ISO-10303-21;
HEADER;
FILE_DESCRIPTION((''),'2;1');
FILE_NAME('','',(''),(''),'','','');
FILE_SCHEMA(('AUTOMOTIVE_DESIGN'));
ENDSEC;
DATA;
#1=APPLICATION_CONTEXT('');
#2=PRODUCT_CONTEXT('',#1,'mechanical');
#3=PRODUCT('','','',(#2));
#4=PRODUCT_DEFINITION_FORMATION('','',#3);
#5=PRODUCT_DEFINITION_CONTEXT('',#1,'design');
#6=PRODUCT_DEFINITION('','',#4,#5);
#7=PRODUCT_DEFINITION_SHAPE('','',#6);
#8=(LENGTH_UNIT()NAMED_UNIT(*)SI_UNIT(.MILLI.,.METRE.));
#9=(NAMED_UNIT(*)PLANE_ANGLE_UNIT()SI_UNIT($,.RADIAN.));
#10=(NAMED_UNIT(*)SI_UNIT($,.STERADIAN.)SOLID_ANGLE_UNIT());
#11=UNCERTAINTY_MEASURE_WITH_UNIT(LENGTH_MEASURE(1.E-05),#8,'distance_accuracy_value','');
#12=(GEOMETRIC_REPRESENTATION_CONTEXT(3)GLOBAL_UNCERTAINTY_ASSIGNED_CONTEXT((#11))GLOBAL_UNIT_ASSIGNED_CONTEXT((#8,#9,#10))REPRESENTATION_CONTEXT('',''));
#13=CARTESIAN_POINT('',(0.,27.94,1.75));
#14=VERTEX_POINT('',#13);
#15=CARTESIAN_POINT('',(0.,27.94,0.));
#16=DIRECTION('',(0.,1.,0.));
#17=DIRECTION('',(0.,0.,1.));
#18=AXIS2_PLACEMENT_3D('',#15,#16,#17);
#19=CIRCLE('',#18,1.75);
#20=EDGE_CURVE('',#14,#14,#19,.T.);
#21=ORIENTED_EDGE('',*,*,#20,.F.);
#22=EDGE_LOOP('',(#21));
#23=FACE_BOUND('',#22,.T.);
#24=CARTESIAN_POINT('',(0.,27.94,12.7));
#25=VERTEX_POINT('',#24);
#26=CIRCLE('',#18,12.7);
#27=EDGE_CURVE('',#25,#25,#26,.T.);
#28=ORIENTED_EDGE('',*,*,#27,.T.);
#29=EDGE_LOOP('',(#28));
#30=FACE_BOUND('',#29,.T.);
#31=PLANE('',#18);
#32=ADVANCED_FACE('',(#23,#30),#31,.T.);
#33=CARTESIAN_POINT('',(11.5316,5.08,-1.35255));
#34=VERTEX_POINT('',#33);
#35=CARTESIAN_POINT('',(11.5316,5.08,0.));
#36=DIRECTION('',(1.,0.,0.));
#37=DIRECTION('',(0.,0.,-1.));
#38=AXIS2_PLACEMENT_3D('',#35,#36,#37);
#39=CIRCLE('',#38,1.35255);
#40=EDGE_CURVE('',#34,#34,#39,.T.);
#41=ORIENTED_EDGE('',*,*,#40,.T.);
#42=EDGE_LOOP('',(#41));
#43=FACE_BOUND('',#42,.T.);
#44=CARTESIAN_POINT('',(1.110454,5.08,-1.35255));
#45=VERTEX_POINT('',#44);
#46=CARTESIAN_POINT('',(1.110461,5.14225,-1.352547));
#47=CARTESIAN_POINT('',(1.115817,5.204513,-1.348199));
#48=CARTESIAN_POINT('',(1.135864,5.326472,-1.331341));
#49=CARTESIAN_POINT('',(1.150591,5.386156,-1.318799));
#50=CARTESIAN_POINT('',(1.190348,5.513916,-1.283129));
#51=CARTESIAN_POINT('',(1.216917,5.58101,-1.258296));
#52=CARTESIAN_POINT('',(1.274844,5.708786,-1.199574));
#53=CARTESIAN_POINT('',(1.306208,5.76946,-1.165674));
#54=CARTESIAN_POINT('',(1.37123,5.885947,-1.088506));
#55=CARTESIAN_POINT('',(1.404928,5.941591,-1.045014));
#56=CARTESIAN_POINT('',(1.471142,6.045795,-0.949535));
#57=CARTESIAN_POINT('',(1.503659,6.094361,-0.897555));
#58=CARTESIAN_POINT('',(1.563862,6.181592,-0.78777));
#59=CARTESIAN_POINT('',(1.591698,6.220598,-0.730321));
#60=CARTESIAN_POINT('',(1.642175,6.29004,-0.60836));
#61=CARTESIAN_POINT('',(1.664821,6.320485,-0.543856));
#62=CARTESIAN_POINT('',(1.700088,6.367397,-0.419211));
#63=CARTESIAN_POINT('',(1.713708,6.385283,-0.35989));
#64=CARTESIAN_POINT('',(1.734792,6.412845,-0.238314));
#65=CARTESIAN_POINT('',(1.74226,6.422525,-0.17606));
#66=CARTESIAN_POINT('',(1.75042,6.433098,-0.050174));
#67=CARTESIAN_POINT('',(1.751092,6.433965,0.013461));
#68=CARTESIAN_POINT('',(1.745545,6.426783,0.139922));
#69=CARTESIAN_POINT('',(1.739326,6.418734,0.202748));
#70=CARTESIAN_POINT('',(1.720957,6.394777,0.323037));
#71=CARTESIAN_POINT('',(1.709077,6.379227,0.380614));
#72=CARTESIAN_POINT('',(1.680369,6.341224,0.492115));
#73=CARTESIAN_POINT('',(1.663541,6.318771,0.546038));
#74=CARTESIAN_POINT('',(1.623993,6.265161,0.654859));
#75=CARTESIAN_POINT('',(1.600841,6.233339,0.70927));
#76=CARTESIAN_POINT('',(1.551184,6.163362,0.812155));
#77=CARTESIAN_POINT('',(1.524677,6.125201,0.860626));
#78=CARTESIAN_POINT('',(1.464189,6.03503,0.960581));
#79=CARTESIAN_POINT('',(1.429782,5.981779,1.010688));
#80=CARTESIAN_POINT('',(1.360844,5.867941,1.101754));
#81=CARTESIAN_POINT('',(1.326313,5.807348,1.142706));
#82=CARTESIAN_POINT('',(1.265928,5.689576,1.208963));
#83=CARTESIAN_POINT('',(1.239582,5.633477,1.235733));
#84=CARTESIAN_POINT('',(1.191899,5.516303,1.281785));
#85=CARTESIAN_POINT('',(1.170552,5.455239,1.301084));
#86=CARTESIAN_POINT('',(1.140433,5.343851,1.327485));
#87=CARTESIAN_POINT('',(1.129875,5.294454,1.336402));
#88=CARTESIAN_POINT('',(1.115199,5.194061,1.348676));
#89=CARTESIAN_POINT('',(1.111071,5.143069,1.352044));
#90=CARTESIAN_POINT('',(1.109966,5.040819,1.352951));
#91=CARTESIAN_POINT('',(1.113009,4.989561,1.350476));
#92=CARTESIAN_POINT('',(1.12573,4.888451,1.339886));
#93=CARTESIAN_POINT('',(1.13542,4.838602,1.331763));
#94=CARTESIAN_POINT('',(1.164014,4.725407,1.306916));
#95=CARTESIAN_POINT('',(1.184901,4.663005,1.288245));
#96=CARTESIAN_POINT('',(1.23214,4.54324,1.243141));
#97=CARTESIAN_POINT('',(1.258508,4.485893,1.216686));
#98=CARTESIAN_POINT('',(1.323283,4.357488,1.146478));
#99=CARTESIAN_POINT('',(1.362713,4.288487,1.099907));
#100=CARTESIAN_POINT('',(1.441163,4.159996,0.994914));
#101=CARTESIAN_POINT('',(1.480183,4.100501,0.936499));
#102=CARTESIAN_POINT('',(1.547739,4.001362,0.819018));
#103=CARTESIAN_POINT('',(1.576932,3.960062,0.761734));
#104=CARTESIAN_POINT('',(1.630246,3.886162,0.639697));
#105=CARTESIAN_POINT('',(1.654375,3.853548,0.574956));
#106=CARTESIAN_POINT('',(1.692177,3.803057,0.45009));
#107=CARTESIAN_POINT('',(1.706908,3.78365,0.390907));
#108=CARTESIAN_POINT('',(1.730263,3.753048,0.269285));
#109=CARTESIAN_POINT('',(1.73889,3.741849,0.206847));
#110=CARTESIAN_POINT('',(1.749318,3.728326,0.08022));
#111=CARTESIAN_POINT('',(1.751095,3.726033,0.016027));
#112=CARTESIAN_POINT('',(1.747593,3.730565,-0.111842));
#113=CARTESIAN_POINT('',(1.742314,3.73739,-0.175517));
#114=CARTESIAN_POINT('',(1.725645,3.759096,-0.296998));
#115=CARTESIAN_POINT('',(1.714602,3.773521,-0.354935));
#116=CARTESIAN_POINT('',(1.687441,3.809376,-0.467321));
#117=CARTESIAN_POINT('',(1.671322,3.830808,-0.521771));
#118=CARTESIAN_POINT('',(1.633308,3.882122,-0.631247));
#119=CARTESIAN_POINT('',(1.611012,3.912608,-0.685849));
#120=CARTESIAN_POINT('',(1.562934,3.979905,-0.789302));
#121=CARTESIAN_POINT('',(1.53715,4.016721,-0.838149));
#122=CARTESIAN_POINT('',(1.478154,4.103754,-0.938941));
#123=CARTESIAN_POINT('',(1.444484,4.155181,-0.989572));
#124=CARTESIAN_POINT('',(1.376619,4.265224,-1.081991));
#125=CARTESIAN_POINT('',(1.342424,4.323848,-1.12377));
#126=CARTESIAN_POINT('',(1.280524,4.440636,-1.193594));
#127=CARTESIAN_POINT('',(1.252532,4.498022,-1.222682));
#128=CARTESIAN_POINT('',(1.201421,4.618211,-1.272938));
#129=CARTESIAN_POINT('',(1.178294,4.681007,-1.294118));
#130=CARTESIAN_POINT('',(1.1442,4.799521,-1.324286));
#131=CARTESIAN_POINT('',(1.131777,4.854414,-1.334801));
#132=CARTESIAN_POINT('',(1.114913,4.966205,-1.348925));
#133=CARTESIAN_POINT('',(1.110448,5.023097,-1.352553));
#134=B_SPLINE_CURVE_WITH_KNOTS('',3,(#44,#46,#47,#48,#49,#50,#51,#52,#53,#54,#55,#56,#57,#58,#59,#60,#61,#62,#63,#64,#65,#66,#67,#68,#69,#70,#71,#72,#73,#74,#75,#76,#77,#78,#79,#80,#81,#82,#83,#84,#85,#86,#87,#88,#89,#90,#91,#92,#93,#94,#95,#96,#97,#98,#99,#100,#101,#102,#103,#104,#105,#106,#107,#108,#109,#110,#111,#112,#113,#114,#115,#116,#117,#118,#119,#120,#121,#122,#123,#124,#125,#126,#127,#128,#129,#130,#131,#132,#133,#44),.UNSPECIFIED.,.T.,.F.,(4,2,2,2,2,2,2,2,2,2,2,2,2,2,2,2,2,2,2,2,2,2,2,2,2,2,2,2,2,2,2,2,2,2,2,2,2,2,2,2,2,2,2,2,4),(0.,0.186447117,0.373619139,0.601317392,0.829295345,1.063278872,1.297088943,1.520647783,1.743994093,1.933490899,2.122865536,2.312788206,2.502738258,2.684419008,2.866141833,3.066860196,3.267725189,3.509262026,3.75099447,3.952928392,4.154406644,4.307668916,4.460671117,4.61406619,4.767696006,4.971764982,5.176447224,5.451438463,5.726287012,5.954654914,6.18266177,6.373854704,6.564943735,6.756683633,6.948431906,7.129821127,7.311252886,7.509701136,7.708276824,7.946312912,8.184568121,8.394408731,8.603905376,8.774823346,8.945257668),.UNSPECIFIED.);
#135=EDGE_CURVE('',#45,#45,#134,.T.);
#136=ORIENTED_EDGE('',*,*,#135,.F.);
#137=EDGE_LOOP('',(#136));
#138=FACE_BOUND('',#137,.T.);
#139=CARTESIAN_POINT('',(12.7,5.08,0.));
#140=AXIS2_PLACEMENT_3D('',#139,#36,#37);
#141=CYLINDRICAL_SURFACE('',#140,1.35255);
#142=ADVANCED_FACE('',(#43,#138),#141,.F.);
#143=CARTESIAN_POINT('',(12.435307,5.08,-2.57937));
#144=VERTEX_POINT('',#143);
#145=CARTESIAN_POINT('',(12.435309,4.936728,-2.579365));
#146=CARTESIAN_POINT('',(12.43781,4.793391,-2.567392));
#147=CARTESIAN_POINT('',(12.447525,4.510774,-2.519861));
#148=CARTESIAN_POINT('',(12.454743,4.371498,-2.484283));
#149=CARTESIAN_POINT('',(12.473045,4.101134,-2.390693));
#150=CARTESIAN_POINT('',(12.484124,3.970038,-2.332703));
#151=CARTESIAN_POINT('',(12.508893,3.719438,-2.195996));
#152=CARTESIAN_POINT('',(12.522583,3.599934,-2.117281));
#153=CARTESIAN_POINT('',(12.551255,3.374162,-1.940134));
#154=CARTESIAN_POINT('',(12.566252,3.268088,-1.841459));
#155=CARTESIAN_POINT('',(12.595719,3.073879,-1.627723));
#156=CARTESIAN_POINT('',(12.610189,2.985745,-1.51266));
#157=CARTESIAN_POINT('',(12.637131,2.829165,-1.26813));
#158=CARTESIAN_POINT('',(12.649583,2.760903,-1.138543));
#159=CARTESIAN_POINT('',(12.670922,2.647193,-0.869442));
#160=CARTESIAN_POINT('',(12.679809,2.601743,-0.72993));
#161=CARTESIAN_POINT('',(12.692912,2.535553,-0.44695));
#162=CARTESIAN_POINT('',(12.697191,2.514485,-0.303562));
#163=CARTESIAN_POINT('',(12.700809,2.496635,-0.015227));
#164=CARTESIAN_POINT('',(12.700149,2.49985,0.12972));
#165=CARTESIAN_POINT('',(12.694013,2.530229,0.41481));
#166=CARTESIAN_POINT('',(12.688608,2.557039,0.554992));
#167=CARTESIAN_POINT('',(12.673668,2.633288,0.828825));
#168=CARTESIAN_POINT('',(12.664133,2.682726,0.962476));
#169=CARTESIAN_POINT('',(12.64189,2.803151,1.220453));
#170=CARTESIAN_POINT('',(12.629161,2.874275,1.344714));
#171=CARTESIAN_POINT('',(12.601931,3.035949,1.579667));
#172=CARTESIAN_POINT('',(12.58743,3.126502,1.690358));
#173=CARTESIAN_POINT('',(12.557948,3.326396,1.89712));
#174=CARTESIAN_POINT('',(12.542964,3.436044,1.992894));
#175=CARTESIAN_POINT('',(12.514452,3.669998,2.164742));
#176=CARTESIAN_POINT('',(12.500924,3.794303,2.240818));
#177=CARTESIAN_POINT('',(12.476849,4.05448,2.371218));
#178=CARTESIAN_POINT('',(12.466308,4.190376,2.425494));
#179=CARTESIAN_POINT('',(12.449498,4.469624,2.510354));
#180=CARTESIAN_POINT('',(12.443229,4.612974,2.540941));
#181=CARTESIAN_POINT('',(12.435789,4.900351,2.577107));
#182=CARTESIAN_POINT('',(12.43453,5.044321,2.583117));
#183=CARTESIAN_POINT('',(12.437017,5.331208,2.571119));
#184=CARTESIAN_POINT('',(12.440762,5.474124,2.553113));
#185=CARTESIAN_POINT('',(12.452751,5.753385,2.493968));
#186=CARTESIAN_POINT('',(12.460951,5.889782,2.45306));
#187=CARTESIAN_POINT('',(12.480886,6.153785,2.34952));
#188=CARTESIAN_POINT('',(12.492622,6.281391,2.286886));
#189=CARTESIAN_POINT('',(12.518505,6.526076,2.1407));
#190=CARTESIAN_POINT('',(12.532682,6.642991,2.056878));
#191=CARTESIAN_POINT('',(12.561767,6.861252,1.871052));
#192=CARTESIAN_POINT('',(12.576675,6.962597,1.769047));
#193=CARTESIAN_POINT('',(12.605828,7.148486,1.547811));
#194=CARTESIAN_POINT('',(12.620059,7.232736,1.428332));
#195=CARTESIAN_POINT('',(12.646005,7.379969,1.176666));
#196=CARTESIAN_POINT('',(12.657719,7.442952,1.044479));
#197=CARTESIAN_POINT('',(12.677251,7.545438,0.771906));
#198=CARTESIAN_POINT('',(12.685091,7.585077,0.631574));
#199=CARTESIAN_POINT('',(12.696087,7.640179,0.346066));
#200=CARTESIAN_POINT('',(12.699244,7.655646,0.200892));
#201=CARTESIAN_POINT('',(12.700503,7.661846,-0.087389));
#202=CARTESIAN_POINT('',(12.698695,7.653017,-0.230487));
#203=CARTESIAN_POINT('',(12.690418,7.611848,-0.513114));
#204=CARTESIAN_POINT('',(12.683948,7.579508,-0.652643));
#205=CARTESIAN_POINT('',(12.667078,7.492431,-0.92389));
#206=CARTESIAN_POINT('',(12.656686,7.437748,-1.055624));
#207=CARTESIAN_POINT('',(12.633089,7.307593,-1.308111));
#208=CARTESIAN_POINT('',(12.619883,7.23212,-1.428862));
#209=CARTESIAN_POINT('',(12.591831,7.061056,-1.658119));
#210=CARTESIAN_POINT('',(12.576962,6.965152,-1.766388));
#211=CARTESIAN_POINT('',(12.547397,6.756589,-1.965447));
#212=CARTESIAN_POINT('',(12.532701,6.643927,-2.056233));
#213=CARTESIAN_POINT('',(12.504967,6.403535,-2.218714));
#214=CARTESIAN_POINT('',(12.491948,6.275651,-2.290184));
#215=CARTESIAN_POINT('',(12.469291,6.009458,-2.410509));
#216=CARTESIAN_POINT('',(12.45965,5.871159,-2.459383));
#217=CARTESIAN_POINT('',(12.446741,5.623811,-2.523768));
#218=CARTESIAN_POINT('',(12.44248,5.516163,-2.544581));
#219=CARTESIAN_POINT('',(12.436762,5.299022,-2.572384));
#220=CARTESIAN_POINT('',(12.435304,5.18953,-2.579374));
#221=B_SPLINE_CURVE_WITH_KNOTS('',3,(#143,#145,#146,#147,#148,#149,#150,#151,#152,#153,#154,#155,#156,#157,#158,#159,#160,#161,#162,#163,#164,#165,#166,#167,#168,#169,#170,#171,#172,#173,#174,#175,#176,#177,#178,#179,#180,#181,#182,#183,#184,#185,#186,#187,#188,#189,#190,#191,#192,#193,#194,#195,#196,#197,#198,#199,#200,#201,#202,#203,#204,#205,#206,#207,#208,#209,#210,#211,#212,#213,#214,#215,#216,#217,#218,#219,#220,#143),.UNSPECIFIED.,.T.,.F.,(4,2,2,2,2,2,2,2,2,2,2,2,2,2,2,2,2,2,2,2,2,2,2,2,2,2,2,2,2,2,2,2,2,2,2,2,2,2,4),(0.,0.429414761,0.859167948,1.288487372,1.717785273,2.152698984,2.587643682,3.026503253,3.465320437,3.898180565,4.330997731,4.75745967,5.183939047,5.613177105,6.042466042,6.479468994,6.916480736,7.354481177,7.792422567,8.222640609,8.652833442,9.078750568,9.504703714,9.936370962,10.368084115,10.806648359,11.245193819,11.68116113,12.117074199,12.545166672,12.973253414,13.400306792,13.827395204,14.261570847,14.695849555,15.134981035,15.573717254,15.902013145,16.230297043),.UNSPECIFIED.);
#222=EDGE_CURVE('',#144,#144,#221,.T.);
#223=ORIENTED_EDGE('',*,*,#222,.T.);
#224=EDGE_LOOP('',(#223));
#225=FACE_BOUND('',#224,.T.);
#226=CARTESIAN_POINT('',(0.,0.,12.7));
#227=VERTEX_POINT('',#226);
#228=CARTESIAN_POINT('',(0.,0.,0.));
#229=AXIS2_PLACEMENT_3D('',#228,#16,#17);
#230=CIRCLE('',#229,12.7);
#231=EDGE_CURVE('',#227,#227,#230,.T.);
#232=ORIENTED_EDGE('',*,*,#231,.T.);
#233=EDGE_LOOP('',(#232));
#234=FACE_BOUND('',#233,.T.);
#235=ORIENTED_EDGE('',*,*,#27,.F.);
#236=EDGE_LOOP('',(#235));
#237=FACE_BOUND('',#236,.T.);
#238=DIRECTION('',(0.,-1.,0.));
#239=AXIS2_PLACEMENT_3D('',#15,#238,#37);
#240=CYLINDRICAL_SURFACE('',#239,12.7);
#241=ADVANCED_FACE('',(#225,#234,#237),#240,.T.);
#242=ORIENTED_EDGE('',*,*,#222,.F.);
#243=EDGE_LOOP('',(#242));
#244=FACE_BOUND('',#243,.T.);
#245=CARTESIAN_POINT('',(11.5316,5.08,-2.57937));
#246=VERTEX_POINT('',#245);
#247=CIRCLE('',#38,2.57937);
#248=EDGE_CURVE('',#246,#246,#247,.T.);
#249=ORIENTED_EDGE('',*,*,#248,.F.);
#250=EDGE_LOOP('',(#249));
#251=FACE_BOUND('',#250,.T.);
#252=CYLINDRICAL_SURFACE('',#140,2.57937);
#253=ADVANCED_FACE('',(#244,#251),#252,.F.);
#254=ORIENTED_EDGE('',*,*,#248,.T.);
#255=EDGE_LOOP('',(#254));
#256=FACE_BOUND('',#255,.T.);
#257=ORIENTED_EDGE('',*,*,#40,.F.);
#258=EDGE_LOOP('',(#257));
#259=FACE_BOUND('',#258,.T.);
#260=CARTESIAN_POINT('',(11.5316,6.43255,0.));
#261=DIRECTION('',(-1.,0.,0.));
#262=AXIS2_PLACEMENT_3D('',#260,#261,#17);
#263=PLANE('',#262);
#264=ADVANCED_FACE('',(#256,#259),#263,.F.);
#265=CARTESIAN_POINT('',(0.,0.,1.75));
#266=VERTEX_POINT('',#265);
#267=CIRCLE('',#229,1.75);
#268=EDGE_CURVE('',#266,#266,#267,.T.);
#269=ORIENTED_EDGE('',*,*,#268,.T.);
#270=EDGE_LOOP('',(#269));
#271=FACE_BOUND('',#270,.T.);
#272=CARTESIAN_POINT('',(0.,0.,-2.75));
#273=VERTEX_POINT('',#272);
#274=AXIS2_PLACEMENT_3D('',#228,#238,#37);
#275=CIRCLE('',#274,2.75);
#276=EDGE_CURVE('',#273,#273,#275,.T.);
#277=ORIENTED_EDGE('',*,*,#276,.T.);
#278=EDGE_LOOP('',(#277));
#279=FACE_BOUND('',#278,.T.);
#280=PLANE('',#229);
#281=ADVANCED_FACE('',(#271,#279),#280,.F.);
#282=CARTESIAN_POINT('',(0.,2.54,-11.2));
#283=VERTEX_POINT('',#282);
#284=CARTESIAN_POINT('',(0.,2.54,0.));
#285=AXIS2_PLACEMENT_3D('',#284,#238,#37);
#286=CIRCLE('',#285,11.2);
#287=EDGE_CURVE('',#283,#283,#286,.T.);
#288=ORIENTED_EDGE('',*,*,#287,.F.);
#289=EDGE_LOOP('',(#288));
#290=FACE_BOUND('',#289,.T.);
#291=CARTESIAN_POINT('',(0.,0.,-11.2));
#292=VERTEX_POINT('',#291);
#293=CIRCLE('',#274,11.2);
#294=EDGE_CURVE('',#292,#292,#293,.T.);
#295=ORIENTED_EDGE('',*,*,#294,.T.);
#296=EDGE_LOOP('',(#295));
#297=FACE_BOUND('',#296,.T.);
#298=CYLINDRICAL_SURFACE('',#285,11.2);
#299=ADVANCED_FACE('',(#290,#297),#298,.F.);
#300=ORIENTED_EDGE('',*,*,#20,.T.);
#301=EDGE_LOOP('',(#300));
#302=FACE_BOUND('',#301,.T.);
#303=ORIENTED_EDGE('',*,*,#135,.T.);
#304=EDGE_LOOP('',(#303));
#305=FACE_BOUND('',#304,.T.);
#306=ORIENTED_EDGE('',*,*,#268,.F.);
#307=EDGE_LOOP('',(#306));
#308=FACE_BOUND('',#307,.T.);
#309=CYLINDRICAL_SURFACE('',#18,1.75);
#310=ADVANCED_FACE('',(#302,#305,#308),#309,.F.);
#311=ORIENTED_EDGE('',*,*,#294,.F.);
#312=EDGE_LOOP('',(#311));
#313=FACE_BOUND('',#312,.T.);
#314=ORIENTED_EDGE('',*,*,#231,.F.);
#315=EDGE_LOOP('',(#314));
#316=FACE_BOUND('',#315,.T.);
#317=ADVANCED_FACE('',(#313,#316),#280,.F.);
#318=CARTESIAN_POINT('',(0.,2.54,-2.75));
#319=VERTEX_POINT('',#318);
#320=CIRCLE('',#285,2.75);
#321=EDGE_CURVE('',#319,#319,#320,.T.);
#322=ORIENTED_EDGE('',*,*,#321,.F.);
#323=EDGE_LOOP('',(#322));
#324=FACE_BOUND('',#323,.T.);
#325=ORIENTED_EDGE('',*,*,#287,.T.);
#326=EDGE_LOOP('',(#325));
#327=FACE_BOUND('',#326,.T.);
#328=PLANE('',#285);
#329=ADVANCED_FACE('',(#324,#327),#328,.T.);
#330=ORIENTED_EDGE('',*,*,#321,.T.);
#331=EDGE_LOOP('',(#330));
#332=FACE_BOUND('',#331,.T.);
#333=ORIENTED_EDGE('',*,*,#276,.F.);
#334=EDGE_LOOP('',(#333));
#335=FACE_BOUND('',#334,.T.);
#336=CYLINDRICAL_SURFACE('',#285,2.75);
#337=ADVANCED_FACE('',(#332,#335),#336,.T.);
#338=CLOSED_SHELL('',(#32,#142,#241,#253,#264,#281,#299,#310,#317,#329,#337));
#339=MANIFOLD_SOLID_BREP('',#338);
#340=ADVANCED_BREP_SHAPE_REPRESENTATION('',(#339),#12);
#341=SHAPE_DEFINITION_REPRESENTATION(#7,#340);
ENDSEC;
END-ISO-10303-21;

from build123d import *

# Parameters (mm, degrees)
SKETCH1_R             = 12.7
BOSS_EXTRUDE1_DEPTH   = 27.94
F_3_0MM_DOWEL_HOLE2_D = 3.5
SKETCH8_R             = 11.2
SKETCH8_R_2           = 2.75
CUT_EXTRUDE1_DEPTH    = 2.54


# Read off the part's stored shape, not the designer's step: CBORE for #2 Button Head Cap Screw1
with BuildPart() as part:
    # Sketch1 → Boss-Extrude1 (new body)
    with BuildSketch(Plane(origin=(0, 0, 0), x_dir=(1, 0, 0), z_dir=(0, 1, 0))):
        with Locations(Location((0, 0, 0), (0, 0, 270))):
            Circle(SKETCH1_R)
    extrude(amount=BOSS_EXTRUDE1_DEPTH)

    # Ø3.0mm Dowel Hole2 (through all)
    with Locations(Plane(origin=(0, 27.94, 0), x_dir=(1, 0, 0), z_dir=(0, 1, 0))):
        with Locations((0, 0)):
            Hole(F_3_0MM_DOWEL_HOLE2_D / 2)

    # CBORE for #2 Button Head Cap Screw1 outl → CBORE for #2 Button Head Cap Screw1 (revolve, cut)
    with BuildSketch(Plane(origin=(0, 5.08, 0), x_dir=(0, 1, 0), z_dir=(0, 0, -1))):
        Polygon((1.35255, 11.5316), (2.57937, 11.5316), (2.57937, 12.700038915), (0, 12.700038915), (0, 1.110061146), (1.35255, 1.110061146), align=None)
    revolve(axis=Axis((0, 5.08, 0), (1, 0, 0)), mode=Mode.SUBTRACT)

    # Sketch8 → Cut-Extrude1 (cut)
    with BuildSketch(Plane.XZ):
        with Locations(Location((0, 0, 0), (0, 0, 270))):
            Circle(SKETCH8_R)
        with Locations(Location((0, 0, 0), (0, 0, 270))):
            Circle(SKETCH8_R_2, mode=Mode.SUBTRACT)
    extrude(amount=-CUT_EXTRUDE1_DEPTH, mode=Mode.SUBTRACT)


solid = part.part
